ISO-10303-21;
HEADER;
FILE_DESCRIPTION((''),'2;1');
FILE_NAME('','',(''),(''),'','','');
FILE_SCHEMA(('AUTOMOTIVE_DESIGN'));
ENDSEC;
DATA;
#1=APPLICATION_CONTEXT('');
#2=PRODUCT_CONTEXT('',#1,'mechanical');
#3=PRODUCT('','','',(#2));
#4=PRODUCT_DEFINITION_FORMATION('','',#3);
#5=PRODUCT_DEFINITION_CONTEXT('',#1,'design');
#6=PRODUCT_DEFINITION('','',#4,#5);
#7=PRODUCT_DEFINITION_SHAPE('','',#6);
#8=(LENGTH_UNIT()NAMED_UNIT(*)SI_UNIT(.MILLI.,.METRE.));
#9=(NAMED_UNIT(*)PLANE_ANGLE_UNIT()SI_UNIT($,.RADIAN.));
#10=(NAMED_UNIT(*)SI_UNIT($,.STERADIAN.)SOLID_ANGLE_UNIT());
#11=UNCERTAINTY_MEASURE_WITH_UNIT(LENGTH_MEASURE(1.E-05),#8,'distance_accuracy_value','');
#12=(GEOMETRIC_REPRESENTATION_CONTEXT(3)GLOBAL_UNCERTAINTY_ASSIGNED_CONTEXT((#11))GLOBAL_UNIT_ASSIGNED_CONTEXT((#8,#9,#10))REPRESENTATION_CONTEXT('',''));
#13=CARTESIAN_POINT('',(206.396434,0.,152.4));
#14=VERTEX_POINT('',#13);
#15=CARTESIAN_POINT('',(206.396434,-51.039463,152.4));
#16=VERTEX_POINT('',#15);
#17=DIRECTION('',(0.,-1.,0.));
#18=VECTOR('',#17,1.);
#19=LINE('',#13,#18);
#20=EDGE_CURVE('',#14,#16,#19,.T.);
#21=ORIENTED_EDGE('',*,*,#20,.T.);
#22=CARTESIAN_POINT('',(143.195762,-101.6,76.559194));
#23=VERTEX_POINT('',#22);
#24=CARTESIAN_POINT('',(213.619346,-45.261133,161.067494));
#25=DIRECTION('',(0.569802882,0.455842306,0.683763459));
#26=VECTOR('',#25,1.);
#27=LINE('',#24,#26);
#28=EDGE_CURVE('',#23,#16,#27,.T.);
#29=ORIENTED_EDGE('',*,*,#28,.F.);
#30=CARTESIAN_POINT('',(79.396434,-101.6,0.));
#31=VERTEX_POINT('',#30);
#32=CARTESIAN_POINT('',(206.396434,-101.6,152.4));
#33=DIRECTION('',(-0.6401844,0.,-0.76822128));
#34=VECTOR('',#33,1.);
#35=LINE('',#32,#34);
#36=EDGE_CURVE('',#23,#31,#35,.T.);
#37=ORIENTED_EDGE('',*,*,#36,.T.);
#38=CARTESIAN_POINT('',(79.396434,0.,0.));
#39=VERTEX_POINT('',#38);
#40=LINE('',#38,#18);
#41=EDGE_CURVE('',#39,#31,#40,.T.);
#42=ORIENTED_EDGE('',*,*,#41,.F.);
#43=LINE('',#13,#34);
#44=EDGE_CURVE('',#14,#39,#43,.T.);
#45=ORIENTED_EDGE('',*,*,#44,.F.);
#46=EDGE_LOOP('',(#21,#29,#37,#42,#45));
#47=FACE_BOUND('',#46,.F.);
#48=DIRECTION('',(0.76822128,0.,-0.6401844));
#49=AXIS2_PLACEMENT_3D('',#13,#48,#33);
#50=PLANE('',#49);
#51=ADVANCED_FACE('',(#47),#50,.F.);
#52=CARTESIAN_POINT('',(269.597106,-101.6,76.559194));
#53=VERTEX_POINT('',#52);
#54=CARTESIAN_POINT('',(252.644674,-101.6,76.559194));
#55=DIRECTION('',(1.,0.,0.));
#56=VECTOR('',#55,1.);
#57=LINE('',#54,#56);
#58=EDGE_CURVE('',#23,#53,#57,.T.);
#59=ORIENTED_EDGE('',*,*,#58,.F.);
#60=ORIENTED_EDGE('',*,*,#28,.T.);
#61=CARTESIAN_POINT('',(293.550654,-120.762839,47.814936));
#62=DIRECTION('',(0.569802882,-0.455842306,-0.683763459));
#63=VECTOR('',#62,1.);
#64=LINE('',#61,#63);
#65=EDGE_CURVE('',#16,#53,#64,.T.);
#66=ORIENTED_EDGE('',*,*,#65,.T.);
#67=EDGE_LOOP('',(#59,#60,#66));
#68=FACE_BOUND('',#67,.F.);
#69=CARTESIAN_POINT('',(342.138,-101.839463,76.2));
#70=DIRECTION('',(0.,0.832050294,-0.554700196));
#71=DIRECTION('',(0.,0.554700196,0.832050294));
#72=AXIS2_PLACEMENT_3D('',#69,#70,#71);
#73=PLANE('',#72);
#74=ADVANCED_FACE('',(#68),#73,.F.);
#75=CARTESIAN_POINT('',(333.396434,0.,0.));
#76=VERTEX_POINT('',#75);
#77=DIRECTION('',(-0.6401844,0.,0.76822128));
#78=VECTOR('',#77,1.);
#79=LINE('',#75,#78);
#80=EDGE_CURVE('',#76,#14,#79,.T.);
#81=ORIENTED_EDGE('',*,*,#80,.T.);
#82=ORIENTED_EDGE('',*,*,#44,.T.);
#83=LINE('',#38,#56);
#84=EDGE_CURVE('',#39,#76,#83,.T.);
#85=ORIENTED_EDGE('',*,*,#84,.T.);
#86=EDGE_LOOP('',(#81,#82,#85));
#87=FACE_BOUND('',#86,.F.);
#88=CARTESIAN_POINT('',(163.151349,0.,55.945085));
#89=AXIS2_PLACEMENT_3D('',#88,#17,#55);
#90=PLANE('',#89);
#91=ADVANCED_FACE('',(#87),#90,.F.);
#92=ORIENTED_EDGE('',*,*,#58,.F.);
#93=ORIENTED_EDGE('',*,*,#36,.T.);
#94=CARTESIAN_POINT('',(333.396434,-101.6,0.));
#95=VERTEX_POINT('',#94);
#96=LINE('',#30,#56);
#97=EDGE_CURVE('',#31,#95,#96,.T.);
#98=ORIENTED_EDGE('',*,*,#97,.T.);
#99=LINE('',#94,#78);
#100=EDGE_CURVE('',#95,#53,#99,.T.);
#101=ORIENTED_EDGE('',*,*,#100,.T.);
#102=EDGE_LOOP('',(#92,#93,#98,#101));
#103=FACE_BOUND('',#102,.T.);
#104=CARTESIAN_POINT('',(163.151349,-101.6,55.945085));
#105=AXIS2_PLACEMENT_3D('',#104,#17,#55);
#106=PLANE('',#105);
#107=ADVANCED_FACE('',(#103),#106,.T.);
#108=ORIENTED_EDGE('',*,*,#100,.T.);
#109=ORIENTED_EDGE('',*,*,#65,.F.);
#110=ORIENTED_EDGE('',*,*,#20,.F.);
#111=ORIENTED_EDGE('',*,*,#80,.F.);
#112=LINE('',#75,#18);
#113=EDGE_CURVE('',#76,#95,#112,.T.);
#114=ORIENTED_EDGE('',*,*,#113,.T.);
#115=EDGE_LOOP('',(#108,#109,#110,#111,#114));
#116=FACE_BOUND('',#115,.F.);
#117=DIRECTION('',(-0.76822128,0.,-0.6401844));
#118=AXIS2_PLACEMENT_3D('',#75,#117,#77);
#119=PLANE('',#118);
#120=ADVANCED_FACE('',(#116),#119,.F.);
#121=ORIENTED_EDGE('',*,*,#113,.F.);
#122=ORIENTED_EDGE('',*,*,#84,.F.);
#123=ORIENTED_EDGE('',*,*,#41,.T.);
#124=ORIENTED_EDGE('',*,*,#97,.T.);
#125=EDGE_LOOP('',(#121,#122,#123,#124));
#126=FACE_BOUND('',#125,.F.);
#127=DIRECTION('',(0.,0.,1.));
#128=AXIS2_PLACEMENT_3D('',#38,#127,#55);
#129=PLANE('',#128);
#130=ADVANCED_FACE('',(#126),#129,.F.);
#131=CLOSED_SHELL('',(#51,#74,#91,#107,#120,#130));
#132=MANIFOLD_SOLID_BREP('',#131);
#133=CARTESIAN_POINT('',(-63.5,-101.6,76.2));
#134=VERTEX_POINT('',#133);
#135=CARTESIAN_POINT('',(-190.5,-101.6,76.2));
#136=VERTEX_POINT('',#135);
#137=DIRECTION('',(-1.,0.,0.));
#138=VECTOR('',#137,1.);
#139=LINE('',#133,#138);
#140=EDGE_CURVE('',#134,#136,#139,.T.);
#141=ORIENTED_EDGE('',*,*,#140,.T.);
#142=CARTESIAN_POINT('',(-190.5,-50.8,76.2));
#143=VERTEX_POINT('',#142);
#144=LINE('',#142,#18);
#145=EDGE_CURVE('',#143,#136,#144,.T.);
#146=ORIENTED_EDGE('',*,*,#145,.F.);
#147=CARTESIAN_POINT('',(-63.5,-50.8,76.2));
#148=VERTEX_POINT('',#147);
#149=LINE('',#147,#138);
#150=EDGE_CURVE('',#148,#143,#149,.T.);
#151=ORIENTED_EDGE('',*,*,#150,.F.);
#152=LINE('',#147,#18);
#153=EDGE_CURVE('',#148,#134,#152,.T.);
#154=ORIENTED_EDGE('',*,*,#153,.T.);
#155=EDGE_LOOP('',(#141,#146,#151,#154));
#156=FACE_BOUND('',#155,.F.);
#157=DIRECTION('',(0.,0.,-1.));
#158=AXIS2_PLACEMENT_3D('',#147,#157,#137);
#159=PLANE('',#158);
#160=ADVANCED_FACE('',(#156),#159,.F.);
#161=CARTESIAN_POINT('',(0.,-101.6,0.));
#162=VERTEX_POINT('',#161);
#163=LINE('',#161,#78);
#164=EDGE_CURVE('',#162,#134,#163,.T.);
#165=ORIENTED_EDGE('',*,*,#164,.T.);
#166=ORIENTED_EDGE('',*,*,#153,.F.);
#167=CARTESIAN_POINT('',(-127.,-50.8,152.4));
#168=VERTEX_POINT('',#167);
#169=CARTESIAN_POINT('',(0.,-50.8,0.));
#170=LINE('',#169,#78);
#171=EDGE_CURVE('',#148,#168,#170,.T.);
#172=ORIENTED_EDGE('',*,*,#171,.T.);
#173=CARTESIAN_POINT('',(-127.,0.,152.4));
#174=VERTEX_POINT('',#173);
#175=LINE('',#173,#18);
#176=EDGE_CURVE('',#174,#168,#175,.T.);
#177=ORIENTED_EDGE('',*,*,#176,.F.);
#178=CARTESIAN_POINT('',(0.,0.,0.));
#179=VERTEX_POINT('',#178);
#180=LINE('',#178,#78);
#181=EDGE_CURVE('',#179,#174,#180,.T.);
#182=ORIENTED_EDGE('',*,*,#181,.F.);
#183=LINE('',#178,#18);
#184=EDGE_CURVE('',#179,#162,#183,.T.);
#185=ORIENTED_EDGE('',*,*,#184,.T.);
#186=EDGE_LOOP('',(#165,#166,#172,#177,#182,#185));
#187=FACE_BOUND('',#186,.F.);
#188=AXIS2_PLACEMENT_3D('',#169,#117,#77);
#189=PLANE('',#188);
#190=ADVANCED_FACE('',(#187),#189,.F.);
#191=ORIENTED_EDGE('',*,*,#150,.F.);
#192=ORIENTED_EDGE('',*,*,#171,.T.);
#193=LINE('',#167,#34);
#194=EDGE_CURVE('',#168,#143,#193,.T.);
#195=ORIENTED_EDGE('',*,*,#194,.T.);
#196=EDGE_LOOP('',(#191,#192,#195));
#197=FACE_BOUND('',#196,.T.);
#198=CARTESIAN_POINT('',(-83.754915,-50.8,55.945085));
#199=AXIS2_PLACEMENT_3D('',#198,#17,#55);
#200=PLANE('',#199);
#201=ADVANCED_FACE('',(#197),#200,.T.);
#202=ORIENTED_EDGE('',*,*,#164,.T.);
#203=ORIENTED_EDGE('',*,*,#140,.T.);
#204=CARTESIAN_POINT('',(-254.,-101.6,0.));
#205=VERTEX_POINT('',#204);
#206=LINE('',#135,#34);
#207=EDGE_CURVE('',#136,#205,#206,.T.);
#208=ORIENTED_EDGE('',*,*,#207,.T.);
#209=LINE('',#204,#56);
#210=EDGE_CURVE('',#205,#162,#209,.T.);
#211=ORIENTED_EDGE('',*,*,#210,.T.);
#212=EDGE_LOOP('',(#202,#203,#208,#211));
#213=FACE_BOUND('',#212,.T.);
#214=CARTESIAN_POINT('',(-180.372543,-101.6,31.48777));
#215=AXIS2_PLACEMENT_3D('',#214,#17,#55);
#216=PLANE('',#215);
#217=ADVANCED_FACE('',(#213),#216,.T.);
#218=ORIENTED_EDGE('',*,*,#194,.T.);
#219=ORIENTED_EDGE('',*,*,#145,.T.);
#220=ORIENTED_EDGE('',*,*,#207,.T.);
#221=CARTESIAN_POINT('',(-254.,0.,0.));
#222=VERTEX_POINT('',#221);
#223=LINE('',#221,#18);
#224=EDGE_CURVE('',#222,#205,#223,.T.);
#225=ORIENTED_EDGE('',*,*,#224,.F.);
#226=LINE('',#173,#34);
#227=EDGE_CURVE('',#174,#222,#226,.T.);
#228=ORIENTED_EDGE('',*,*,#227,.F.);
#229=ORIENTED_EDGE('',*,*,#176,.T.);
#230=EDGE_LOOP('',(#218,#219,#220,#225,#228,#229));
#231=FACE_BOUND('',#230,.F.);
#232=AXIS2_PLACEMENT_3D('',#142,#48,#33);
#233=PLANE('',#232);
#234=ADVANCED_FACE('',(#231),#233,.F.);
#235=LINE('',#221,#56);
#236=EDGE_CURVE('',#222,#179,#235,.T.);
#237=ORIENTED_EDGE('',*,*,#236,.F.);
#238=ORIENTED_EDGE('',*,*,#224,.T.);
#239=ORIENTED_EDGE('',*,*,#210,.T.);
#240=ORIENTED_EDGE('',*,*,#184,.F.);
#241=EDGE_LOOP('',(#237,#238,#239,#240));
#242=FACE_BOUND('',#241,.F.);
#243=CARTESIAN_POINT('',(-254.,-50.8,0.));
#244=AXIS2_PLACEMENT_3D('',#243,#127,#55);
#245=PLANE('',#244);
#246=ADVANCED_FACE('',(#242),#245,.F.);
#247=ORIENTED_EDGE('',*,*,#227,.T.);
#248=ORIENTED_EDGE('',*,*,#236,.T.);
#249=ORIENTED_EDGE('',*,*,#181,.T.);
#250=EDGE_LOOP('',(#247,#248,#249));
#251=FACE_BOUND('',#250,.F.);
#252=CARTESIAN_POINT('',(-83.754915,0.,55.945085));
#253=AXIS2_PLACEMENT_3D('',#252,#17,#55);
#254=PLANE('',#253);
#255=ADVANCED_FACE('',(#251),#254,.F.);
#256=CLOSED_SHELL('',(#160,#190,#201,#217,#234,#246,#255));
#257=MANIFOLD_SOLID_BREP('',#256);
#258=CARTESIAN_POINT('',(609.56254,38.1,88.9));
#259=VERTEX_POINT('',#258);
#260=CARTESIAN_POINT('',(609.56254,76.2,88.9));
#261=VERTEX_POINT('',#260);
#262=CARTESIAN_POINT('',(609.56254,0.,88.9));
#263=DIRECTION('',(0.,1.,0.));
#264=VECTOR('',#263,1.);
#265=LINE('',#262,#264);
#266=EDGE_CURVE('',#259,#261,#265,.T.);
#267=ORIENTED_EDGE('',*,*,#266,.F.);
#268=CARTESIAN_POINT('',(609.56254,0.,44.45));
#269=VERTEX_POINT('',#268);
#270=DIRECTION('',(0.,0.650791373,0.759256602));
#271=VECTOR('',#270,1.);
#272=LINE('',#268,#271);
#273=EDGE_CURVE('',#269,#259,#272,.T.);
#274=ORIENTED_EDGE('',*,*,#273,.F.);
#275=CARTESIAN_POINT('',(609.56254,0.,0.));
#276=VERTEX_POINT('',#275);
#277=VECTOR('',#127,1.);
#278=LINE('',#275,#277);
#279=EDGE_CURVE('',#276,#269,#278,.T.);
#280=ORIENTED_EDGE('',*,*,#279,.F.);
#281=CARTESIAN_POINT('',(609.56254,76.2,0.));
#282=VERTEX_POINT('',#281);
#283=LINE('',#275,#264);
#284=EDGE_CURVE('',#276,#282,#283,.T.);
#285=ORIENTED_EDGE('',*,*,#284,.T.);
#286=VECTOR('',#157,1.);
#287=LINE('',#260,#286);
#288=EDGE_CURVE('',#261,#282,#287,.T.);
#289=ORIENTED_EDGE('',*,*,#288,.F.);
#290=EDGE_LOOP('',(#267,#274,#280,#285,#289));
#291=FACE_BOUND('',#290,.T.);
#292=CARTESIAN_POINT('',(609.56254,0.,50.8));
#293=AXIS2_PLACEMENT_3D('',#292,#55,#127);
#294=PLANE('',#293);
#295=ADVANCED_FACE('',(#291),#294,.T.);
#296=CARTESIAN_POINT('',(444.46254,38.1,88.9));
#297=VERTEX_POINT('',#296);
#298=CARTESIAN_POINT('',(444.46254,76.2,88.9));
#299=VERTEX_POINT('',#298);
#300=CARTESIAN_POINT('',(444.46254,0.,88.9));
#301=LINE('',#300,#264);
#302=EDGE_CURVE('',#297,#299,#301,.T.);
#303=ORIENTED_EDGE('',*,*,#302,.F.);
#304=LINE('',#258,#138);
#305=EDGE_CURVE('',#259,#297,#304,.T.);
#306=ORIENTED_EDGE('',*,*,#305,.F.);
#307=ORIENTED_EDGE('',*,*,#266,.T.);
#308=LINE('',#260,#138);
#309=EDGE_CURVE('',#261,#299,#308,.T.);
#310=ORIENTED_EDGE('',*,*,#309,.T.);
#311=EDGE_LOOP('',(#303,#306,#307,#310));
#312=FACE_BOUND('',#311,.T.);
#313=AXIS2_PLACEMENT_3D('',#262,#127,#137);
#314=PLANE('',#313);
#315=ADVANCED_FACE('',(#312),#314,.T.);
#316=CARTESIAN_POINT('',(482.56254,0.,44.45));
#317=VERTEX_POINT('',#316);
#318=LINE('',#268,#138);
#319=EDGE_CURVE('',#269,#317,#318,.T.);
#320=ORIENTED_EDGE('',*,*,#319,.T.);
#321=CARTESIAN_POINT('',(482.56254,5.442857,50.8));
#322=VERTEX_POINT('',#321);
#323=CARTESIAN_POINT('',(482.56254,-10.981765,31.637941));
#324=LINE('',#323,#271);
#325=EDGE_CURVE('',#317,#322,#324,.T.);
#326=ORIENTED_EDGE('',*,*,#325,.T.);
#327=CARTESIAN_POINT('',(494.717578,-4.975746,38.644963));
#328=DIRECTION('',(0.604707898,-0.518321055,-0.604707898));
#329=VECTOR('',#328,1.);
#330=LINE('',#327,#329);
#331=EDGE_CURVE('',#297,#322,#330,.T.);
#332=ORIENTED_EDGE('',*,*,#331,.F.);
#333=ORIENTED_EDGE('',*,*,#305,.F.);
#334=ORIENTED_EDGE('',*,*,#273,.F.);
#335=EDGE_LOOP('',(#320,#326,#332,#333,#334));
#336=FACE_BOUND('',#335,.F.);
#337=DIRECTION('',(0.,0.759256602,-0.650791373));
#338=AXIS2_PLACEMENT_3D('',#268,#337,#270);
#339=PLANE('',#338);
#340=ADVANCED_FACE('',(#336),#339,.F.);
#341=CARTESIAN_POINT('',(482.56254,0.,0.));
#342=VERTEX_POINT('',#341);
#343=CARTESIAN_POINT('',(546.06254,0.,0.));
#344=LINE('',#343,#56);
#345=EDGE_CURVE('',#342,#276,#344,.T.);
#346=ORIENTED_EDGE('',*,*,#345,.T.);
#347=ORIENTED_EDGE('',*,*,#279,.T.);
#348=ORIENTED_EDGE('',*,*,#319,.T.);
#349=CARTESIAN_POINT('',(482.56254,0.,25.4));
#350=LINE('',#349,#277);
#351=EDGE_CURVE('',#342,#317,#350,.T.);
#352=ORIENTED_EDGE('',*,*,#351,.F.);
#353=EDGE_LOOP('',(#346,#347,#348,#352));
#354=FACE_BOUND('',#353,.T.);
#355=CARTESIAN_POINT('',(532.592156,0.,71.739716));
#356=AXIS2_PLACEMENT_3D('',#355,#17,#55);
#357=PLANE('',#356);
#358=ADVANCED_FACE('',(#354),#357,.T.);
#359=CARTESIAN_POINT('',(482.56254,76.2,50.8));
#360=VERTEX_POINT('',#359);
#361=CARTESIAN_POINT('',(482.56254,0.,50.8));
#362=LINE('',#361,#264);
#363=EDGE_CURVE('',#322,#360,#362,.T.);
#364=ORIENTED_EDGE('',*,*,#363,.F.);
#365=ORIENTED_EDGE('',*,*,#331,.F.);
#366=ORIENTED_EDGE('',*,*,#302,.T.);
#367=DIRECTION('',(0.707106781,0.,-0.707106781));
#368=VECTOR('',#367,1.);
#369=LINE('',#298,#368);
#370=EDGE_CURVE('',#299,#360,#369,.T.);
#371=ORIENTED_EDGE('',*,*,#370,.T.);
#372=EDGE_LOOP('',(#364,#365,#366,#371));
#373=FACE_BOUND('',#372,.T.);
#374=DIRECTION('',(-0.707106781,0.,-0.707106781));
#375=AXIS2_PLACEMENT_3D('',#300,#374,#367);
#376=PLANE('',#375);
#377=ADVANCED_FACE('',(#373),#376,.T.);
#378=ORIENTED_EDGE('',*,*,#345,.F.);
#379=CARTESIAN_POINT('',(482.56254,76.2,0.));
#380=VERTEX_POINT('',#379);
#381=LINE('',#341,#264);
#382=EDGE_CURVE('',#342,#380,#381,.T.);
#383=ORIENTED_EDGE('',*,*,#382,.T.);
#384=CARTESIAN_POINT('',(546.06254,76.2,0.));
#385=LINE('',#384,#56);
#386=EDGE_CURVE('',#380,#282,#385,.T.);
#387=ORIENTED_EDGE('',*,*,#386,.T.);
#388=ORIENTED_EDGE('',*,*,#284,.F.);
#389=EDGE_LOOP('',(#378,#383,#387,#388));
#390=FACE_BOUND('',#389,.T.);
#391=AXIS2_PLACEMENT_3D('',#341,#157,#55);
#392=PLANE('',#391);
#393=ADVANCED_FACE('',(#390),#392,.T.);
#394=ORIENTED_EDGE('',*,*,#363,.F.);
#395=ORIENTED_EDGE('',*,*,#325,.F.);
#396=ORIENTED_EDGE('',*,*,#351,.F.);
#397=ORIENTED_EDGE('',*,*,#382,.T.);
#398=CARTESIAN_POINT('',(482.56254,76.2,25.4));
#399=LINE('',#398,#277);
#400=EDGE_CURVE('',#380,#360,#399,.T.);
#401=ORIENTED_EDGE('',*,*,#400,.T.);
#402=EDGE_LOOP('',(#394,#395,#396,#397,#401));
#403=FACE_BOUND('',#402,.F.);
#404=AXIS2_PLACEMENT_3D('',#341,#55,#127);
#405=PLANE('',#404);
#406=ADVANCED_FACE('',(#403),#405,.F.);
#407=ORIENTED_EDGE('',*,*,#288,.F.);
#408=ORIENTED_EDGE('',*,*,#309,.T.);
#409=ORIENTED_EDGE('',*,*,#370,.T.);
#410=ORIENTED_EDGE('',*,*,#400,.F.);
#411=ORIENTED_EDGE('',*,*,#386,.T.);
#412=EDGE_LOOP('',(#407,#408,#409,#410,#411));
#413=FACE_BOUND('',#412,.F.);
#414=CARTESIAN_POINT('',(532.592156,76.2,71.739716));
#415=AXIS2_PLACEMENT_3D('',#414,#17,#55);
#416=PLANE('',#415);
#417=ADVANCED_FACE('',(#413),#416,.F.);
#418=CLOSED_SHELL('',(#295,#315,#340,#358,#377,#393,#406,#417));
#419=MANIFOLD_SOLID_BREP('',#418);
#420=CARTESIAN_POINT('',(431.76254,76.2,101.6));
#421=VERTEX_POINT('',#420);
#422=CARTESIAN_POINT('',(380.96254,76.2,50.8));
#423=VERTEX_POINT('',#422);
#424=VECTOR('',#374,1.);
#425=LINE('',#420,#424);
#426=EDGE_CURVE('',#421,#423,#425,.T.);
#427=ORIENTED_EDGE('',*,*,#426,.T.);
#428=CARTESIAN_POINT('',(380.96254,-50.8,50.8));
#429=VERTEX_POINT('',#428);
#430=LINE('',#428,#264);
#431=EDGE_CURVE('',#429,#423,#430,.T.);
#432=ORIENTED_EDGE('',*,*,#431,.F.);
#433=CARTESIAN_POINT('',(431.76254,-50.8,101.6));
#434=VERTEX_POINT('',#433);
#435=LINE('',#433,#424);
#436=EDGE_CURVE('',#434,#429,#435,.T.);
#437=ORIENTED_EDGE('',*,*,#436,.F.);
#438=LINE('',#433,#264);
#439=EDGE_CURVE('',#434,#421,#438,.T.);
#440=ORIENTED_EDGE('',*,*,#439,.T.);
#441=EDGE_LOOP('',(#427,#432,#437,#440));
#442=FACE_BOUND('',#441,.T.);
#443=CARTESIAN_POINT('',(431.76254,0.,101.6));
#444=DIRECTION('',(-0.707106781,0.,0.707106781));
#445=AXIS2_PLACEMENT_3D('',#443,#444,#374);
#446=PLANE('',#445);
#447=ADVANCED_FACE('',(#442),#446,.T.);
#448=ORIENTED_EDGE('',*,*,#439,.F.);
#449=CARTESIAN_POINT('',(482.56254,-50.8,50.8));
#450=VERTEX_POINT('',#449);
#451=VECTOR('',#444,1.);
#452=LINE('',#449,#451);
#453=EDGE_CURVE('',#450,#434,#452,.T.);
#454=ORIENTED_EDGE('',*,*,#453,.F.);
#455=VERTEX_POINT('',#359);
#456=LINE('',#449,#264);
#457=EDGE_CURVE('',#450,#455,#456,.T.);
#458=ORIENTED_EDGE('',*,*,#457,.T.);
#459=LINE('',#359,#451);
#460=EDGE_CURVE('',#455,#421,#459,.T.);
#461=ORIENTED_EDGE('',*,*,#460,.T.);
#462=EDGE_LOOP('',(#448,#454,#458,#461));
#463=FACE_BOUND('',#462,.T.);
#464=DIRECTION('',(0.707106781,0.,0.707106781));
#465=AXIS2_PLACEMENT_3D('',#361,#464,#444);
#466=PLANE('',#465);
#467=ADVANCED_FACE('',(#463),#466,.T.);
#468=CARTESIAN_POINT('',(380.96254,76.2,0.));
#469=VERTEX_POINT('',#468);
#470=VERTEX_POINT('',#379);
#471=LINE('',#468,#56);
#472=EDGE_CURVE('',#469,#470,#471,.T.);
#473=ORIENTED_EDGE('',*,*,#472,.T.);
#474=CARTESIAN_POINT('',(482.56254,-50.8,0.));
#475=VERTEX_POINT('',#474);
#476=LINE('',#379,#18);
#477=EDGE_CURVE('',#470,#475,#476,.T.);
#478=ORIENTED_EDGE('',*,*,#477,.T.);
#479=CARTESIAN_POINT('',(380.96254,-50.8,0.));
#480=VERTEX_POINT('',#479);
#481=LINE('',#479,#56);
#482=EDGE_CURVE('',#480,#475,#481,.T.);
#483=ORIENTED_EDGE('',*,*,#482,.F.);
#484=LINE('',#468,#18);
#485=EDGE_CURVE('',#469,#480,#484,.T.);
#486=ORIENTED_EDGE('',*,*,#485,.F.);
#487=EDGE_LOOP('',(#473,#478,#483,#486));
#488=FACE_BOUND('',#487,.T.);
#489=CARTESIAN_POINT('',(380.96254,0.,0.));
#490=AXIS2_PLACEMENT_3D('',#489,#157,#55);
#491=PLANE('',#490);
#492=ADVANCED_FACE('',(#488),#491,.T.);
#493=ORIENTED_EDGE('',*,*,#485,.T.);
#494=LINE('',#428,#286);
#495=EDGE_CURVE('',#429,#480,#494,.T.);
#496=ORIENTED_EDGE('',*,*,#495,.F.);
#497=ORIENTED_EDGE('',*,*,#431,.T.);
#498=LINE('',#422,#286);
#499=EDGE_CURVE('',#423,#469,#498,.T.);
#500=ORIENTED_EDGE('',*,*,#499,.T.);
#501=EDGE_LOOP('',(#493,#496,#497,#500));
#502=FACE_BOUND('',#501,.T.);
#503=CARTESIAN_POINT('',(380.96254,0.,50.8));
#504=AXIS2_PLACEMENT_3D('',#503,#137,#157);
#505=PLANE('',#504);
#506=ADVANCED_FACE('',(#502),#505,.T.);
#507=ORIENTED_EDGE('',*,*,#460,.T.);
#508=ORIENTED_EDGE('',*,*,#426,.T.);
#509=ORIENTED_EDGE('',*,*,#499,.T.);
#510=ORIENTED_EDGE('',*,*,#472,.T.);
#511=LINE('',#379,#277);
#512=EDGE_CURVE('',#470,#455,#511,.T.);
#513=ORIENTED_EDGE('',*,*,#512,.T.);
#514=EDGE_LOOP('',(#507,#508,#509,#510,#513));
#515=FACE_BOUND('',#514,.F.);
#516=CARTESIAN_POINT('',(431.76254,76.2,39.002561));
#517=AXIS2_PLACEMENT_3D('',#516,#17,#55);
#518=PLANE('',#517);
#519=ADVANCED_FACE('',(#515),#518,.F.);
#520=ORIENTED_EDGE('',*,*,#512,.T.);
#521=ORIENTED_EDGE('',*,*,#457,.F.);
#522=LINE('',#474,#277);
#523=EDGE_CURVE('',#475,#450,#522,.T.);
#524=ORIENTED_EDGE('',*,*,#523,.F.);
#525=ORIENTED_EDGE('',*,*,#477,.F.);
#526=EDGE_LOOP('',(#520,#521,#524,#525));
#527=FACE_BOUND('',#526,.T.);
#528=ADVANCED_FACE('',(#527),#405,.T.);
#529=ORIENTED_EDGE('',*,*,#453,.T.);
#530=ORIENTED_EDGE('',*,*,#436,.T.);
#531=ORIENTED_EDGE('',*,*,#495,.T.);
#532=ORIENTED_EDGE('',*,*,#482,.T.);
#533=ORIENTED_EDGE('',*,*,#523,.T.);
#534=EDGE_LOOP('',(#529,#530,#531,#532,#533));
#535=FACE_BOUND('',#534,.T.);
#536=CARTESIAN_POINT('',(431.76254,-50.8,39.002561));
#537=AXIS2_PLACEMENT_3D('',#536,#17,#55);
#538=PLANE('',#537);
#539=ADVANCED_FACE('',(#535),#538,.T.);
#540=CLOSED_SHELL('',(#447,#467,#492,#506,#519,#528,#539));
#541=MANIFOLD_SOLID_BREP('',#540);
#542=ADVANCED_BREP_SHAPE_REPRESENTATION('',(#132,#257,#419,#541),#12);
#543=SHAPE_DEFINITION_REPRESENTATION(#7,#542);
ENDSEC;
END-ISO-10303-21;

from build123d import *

# Parameters (mm, degrees)
F1_DEPTH       = 50.8
F3_DEPTH       = 50.8
F5_DEPTH       = 101.6
F8_DEPTH       = 239.522
F10_DEPTH      = 50.8
F10_DEPTH_BACK = 76.2
F9_W           = 127
F9_H           = 50.8
F11_DEPTH      = 76.2
F12_DEPTH      = 76.2
F14_DEPTH      = 167.386


with BuildPart() as f1:
    # F0 (on Front) → F1 (new body)
    with BuildSketch(Plane.XZ):
        Polygon((-127, 0), (0, 0), (-127, 152.4), align=None)
        Polygon((-254, 0), (-127, 0), (-127, 152.4), align=None)
    extrude(amount=F1_DEPTH)

    # F2 (on face) → F3 (join)
    with BuildSketch(Plane.XZ.offset(50.8)):
        Polygon((-190.5, 76.2), (-254, 0), (-127, 0), (-127, 76.2), align=None)
        Polygon((-127, 76.2), (-127, 0), (0, 0), (-63.5, 76.2), align=None)
    extrude(amount=F3_DEPTH)


with BuildPart() as f5:
    # F4 (on Front) → F5 (new body)
    with BuildSketch(Plane.XZ):
        Polygon((206.3964341254, 152.4), (79.3964341254, 0), (206.3964341254, 0), align=None)
        Polygon((206.3964341254, 152.4), (206.3964341254, 0), (333.3964341254, 0), align=None)
    extrude(amount=F5_DEPTH)

    # F7 (on offset) → F8 (cut)
    with BuildSketch(Plane.YZ.offset(342.138)):
        Polygon((-51.0394626021, 152.4), (-101.8394626021, 152.4), (-101.8394626021, 76.2), align=None)
    extrude(amount=-F8_DEPTH, mode=Mode.SUBTRACT)


with BuildPart() as f10:
    # F9 (on Front) → F10 (new body, two sides)
    with BuildSketch(Plane.XZ) as f10_sk:
        Polygon((380.9625402625, 50.8), (380.9625402625, 0), (431.7625402625, 0), (482.5625402625, 0), (482.5625402625, 50.8), (444.4625402625, 88.9), (431.7625402625, 101.6), align=None)
    extrude(amount=F10_DEPTH)
    extrude(f10_sk.sketch, amount=-F10_DEPTH_BACK)


with BuildPart() as f11:
    # F9 (on Front) → F11 (new body)
    with BuildSketch(Plane.XZ):
        with Locations((546.0625402625, 25.4)):
            Rectangle(F9_W, F9_H)
    extrude(amount=-F11_DEPTH)

    # F9 (on Front) → F12 (join)
    with BuildSketch(Plane.XZ):
        Polygon((444.4625402625, 88.9), (482.5625402625, 50.8), (609.5625402625, 50.8), (609.5625402625, 88.9), align=None)
    extrude(amount=-F12_DEPTH)

    # F13 (on face) → F14 (cut)
    with BuildSketch(Plane.YZ.offset(609.5625402625)):
        Polygon((0, 88.9), (0, 44.45), (38.1, 88.9), align=None)
    extrude(amount=-F14_DEPTH, mode=Mode.SUBTRACT)


solid = Compound([f1.part, f5.part, f10.part, f11.part])
